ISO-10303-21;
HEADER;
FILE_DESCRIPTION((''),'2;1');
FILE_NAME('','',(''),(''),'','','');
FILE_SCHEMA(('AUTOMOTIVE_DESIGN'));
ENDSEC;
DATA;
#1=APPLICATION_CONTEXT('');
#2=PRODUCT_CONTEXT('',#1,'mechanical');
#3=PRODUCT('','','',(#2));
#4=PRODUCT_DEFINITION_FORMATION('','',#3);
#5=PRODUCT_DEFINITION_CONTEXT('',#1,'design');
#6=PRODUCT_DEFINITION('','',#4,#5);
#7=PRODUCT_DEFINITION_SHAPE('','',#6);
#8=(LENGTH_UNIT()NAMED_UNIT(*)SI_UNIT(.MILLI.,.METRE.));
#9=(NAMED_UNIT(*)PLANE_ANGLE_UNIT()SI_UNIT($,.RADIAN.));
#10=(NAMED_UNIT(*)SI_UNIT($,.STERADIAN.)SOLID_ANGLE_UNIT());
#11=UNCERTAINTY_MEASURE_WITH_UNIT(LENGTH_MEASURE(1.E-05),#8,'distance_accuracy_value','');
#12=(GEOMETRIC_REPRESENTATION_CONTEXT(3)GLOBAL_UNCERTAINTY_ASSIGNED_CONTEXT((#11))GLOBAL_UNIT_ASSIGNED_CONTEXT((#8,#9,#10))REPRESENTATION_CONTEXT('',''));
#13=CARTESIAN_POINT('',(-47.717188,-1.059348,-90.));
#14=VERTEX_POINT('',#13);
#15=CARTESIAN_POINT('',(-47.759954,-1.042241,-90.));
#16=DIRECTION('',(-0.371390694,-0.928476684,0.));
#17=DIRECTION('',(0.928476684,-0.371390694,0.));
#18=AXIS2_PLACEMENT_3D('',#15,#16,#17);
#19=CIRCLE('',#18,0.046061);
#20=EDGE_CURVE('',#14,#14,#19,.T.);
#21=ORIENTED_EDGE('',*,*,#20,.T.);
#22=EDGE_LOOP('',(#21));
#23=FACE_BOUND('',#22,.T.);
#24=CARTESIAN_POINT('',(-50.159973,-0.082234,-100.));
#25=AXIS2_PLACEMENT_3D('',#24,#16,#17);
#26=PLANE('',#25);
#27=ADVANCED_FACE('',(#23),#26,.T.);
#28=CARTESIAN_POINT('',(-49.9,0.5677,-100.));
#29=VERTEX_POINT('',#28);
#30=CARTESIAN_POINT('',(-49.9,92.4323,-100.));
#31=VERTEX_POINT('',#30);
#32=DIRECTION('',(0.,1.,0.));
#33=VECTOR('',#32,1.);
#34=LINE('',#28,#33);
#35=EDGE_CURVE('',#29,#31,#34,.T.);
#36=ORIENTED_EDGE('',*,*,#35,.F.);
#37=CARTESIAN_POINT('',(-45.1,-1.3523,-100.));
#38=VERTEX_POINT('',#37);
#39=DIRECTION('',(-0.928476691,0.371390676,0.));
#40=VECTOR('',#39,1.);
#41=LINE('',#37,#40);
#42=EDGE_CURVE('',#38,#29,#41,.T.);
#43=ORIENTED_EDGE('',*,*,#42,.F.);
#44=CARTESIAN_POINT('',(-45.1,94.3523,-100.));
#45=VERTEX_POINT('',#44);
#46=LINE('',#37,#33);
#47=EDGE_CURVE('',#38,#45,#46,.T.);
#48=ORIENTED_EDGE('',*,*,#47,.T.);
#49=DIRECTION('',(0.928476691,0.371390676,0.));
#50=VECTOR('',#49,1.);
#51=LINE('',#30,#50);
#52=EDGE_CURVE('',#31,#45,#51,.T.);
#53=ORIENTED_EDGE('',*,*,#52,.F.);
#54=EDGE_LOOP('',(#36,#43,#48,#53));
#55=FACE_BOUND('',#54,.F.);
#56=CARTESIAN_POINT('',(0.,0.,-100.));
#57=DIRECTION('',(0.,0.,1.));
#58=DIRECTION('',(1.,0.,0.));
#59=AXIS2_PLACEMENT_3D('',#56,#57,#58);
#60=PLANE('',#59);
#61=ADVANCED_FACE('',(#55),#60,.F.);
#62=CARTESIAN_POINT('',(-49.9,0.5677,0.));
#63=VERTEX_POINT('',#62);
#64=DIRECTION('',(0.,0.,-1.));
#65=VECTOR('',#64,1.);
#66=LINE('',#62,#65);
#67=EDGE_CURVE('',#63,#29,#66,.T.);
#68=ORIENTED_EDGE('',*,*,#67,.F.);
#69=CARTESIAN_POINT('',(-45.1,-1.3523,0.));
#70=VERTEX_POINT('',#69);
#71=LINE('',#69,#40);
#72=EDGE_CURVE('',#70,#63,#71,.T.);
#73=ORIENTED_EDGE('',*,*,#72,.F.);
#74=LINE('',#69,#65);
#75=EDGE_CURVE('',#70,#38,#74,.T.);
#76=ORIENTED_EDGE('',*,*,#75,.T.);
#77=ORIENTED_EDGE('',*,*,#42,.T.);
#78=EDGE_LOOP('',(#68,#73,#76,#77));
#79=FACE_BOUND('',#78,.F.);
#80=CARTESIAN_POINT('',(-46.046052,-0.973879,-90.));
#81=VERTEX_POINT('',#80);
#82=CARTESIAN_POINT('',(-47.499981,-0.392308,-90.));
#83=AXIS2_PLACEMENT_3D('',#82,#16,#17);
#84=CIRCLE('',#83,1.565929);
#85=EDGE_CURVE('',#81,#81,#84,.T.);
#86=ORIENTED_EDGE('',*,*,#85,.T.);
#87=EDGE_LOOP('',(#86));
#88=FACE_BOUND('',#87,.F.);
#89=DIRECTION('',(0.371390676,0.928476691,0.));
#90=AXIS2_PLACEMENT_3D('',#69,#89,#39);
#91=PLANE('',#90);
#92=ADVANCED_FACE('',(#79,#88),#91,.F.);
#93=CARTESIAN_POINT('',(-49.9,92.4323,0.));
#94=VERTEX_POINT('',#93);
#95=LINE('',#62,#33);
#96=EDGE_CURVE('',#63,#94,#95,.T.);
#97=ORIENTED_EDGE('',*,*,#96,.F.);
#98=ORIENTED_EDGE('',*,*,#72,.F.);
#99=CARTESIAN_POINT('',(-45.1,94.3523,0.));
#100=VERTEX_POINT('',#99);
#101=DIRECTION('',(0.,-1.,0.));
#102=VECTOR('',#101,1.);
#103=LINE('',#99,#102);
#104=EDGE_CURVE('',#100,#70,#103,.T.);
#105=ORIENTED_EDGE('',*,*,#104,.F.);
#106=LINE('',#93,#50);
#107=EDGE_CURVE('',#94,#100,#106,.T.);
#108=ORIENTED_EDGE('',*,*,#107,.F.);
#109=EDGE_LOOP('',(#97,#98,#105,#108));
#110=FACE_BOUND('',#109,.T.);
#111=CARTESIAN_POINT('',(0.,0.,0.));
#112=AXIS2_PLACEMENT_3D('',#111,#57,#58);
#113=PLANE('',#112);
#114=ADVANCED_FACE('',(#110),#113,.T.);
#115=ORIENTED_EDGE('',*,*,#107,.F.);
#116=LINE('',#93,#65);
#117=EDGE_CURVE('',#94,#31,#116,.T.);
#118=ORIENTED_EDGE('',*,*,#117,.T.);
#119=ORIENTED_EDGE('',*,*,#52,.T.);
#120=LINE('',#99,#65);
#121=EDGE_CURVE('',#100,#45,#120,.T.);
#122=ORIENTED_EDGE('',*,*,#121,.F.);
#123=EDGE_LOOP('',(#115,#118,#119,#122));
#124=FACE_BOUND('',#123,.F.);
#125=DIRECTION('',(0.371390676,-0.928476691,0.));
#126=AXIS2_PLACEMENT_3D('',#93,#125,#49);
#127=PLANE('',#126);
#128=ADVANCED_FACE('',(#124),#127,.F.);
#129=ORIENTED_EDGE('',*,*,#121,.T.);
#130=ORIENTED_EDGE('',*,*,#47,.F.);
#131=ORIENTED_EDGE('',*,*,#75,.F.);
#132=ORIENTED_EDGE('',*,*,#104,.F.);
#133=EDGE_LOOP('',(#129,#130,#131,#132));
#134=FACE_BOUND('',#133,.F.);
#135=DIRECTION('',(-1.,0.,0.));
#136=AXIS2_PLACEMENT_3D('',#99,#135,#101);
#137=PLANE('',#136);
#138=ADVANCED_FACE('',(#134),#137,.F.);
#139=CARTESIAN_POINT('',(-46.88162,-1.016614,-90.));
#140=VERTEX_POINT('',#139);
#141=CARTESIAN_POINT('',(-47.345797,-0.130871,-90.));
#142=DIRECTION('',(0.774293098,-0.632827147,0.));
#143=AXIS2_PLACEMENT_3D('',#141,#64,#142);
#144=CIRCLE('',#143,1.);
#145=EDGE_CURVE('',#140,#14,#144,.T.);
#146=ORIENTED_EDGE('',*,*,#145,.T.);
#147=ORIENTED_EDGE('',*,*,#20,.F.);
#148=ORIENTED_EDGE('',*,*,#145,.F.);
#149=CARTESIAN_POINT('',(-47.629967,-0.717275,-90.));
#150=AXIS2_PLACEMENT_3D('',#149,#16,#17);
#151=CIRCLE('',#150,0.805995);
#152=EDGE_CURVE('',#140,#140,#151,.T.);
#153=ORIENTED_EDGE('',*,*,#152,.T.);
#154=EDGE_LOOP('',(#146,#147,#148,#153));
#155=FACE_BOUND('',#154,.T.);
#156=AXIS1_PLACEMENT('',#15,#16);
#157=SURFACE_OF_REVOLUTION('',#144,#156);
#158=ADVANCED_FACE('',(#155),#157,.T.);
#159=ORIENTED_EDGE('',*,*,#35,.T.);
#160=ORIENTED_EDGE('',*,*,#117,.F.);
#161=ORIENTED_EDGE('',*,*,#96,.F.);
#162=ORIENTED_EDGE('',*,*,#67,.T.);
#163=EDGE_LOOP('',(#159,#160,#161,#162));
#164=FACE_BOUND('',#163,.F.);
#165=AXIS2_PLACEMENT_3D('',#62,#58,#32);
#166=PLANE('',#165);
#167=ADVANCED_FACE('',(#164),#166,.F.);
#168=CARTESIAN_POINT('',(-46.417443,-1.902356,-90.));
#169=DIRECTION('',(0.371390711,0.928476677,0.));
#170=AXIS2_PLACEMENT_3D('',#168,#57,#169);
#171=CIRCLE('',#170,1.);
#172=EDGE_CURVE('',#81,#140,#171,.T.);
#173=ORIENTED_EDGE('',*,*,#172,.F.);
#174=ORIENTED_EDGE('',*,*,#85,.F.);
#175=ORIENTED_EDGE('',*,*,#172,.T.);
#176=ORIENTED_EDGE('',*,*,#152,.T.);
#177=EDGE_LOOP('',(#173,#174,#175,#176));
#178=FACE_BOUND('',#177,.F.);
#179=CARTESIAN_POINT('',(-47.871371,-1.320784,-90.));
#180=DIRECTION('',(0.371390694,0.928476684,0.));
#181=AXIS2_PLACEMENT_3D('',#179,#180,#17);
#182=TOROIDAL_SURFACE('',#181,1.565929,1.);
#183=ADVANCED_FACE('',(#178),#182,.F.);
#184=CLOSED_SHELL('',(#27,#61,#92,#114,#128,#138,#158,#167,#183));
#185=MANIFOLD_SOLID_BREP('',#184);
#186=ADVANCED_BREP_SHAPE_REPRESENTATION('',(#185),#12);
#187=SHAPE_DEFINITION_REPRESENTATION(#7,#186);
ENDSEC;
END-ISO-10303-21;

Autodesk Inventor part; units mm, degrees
ref_plane "YZ Plane" through (0, 0, 0) normal (1, 0, 0) x (0, 1, 0)
ref_plane "XZ Plane" through (0, 0, 0) normal (0, 1, 0) x (-1, 0, 0)
ref_plane "XY Plane" through (0, 0, 0) normal (0, 0, 1) x (1, 0, 0)
sketch "Sketch1" plane through (0, 0, 0) normal (0, 0, 1) x (1, 0, 0)
  line L0 (44.8, 3.5) -> (44.8, 89.5) construction
  line L1 (-45, 89.5) -> (44.8, 89.5) construction
  line L2 (-45, 94.5) -> (-45, 89.5) construction
  line L3 (-50, 92.5) -> (-45, 94.5) construction
  line L4 (-50, 0.5) -> (-50, 92.5) construction
  line L5 (-45, -1.5) -> (-50, 0.5) construction
  line L6 (-45, 3.5) -> (-45, -1.5) construction
  line L7 (44.8, 3.5) -> (-45, 3.5) construction
  line L8 (-49.9, 92.4323) -> (-45.1, 94.3523)
  line L9 (-45.1, 94.3523) -> (-45.1, 89.4)
  line L10 (-45.1, 89.4) -> (44.7, 89.4) construction
  line L11 (44.7, 89.4) -> (44.7, 3.6) construction
  line L12 (44.7, 3.6) -> (-45.1, 3.6) construction
  line L13 (-45.1, 3.6) -> (-45.1, -1.3523)
  line L14 (-45.1, -1.3523) -> (-49.9, 0.5677)
  line L15 (-49.9, 0.5677) -> (-49.9, 92.4323)
  line L16 (-45.1, 89.4) -> (-45.1, 3.6)
  point P0 (0, 0)
  dimension "d0" = 0.1
extrude "Extrusion1" add sketch "Sketch1" against normal blind 100
sketch "Sketch2" plane through (-49.9, 0.5677, -100) normal (-0.3713907, -0.9284767, 0) x (0.9284767, -0.3713907, 0)
  circle A0 centre (2.5849, 10) radius 1
  line L0 (5.1698, 0) -> (0, 0) projected
  line L1 (2.5849, 0) -> (2.5849, 10) construction
  point P0 (46.5418, 100)
  dimension "d3" = 2
  dimension "d4" = 10
extrude "Extrusion2" add sketch "Sketch2" along normal blind 0.7
fillet "Fillet1" radius 1 2 edges at (-48.6885, -0.6708, -90) (-48.4285, -0.0209, -90)
properties part number "door2" material "ABS Plastic"
